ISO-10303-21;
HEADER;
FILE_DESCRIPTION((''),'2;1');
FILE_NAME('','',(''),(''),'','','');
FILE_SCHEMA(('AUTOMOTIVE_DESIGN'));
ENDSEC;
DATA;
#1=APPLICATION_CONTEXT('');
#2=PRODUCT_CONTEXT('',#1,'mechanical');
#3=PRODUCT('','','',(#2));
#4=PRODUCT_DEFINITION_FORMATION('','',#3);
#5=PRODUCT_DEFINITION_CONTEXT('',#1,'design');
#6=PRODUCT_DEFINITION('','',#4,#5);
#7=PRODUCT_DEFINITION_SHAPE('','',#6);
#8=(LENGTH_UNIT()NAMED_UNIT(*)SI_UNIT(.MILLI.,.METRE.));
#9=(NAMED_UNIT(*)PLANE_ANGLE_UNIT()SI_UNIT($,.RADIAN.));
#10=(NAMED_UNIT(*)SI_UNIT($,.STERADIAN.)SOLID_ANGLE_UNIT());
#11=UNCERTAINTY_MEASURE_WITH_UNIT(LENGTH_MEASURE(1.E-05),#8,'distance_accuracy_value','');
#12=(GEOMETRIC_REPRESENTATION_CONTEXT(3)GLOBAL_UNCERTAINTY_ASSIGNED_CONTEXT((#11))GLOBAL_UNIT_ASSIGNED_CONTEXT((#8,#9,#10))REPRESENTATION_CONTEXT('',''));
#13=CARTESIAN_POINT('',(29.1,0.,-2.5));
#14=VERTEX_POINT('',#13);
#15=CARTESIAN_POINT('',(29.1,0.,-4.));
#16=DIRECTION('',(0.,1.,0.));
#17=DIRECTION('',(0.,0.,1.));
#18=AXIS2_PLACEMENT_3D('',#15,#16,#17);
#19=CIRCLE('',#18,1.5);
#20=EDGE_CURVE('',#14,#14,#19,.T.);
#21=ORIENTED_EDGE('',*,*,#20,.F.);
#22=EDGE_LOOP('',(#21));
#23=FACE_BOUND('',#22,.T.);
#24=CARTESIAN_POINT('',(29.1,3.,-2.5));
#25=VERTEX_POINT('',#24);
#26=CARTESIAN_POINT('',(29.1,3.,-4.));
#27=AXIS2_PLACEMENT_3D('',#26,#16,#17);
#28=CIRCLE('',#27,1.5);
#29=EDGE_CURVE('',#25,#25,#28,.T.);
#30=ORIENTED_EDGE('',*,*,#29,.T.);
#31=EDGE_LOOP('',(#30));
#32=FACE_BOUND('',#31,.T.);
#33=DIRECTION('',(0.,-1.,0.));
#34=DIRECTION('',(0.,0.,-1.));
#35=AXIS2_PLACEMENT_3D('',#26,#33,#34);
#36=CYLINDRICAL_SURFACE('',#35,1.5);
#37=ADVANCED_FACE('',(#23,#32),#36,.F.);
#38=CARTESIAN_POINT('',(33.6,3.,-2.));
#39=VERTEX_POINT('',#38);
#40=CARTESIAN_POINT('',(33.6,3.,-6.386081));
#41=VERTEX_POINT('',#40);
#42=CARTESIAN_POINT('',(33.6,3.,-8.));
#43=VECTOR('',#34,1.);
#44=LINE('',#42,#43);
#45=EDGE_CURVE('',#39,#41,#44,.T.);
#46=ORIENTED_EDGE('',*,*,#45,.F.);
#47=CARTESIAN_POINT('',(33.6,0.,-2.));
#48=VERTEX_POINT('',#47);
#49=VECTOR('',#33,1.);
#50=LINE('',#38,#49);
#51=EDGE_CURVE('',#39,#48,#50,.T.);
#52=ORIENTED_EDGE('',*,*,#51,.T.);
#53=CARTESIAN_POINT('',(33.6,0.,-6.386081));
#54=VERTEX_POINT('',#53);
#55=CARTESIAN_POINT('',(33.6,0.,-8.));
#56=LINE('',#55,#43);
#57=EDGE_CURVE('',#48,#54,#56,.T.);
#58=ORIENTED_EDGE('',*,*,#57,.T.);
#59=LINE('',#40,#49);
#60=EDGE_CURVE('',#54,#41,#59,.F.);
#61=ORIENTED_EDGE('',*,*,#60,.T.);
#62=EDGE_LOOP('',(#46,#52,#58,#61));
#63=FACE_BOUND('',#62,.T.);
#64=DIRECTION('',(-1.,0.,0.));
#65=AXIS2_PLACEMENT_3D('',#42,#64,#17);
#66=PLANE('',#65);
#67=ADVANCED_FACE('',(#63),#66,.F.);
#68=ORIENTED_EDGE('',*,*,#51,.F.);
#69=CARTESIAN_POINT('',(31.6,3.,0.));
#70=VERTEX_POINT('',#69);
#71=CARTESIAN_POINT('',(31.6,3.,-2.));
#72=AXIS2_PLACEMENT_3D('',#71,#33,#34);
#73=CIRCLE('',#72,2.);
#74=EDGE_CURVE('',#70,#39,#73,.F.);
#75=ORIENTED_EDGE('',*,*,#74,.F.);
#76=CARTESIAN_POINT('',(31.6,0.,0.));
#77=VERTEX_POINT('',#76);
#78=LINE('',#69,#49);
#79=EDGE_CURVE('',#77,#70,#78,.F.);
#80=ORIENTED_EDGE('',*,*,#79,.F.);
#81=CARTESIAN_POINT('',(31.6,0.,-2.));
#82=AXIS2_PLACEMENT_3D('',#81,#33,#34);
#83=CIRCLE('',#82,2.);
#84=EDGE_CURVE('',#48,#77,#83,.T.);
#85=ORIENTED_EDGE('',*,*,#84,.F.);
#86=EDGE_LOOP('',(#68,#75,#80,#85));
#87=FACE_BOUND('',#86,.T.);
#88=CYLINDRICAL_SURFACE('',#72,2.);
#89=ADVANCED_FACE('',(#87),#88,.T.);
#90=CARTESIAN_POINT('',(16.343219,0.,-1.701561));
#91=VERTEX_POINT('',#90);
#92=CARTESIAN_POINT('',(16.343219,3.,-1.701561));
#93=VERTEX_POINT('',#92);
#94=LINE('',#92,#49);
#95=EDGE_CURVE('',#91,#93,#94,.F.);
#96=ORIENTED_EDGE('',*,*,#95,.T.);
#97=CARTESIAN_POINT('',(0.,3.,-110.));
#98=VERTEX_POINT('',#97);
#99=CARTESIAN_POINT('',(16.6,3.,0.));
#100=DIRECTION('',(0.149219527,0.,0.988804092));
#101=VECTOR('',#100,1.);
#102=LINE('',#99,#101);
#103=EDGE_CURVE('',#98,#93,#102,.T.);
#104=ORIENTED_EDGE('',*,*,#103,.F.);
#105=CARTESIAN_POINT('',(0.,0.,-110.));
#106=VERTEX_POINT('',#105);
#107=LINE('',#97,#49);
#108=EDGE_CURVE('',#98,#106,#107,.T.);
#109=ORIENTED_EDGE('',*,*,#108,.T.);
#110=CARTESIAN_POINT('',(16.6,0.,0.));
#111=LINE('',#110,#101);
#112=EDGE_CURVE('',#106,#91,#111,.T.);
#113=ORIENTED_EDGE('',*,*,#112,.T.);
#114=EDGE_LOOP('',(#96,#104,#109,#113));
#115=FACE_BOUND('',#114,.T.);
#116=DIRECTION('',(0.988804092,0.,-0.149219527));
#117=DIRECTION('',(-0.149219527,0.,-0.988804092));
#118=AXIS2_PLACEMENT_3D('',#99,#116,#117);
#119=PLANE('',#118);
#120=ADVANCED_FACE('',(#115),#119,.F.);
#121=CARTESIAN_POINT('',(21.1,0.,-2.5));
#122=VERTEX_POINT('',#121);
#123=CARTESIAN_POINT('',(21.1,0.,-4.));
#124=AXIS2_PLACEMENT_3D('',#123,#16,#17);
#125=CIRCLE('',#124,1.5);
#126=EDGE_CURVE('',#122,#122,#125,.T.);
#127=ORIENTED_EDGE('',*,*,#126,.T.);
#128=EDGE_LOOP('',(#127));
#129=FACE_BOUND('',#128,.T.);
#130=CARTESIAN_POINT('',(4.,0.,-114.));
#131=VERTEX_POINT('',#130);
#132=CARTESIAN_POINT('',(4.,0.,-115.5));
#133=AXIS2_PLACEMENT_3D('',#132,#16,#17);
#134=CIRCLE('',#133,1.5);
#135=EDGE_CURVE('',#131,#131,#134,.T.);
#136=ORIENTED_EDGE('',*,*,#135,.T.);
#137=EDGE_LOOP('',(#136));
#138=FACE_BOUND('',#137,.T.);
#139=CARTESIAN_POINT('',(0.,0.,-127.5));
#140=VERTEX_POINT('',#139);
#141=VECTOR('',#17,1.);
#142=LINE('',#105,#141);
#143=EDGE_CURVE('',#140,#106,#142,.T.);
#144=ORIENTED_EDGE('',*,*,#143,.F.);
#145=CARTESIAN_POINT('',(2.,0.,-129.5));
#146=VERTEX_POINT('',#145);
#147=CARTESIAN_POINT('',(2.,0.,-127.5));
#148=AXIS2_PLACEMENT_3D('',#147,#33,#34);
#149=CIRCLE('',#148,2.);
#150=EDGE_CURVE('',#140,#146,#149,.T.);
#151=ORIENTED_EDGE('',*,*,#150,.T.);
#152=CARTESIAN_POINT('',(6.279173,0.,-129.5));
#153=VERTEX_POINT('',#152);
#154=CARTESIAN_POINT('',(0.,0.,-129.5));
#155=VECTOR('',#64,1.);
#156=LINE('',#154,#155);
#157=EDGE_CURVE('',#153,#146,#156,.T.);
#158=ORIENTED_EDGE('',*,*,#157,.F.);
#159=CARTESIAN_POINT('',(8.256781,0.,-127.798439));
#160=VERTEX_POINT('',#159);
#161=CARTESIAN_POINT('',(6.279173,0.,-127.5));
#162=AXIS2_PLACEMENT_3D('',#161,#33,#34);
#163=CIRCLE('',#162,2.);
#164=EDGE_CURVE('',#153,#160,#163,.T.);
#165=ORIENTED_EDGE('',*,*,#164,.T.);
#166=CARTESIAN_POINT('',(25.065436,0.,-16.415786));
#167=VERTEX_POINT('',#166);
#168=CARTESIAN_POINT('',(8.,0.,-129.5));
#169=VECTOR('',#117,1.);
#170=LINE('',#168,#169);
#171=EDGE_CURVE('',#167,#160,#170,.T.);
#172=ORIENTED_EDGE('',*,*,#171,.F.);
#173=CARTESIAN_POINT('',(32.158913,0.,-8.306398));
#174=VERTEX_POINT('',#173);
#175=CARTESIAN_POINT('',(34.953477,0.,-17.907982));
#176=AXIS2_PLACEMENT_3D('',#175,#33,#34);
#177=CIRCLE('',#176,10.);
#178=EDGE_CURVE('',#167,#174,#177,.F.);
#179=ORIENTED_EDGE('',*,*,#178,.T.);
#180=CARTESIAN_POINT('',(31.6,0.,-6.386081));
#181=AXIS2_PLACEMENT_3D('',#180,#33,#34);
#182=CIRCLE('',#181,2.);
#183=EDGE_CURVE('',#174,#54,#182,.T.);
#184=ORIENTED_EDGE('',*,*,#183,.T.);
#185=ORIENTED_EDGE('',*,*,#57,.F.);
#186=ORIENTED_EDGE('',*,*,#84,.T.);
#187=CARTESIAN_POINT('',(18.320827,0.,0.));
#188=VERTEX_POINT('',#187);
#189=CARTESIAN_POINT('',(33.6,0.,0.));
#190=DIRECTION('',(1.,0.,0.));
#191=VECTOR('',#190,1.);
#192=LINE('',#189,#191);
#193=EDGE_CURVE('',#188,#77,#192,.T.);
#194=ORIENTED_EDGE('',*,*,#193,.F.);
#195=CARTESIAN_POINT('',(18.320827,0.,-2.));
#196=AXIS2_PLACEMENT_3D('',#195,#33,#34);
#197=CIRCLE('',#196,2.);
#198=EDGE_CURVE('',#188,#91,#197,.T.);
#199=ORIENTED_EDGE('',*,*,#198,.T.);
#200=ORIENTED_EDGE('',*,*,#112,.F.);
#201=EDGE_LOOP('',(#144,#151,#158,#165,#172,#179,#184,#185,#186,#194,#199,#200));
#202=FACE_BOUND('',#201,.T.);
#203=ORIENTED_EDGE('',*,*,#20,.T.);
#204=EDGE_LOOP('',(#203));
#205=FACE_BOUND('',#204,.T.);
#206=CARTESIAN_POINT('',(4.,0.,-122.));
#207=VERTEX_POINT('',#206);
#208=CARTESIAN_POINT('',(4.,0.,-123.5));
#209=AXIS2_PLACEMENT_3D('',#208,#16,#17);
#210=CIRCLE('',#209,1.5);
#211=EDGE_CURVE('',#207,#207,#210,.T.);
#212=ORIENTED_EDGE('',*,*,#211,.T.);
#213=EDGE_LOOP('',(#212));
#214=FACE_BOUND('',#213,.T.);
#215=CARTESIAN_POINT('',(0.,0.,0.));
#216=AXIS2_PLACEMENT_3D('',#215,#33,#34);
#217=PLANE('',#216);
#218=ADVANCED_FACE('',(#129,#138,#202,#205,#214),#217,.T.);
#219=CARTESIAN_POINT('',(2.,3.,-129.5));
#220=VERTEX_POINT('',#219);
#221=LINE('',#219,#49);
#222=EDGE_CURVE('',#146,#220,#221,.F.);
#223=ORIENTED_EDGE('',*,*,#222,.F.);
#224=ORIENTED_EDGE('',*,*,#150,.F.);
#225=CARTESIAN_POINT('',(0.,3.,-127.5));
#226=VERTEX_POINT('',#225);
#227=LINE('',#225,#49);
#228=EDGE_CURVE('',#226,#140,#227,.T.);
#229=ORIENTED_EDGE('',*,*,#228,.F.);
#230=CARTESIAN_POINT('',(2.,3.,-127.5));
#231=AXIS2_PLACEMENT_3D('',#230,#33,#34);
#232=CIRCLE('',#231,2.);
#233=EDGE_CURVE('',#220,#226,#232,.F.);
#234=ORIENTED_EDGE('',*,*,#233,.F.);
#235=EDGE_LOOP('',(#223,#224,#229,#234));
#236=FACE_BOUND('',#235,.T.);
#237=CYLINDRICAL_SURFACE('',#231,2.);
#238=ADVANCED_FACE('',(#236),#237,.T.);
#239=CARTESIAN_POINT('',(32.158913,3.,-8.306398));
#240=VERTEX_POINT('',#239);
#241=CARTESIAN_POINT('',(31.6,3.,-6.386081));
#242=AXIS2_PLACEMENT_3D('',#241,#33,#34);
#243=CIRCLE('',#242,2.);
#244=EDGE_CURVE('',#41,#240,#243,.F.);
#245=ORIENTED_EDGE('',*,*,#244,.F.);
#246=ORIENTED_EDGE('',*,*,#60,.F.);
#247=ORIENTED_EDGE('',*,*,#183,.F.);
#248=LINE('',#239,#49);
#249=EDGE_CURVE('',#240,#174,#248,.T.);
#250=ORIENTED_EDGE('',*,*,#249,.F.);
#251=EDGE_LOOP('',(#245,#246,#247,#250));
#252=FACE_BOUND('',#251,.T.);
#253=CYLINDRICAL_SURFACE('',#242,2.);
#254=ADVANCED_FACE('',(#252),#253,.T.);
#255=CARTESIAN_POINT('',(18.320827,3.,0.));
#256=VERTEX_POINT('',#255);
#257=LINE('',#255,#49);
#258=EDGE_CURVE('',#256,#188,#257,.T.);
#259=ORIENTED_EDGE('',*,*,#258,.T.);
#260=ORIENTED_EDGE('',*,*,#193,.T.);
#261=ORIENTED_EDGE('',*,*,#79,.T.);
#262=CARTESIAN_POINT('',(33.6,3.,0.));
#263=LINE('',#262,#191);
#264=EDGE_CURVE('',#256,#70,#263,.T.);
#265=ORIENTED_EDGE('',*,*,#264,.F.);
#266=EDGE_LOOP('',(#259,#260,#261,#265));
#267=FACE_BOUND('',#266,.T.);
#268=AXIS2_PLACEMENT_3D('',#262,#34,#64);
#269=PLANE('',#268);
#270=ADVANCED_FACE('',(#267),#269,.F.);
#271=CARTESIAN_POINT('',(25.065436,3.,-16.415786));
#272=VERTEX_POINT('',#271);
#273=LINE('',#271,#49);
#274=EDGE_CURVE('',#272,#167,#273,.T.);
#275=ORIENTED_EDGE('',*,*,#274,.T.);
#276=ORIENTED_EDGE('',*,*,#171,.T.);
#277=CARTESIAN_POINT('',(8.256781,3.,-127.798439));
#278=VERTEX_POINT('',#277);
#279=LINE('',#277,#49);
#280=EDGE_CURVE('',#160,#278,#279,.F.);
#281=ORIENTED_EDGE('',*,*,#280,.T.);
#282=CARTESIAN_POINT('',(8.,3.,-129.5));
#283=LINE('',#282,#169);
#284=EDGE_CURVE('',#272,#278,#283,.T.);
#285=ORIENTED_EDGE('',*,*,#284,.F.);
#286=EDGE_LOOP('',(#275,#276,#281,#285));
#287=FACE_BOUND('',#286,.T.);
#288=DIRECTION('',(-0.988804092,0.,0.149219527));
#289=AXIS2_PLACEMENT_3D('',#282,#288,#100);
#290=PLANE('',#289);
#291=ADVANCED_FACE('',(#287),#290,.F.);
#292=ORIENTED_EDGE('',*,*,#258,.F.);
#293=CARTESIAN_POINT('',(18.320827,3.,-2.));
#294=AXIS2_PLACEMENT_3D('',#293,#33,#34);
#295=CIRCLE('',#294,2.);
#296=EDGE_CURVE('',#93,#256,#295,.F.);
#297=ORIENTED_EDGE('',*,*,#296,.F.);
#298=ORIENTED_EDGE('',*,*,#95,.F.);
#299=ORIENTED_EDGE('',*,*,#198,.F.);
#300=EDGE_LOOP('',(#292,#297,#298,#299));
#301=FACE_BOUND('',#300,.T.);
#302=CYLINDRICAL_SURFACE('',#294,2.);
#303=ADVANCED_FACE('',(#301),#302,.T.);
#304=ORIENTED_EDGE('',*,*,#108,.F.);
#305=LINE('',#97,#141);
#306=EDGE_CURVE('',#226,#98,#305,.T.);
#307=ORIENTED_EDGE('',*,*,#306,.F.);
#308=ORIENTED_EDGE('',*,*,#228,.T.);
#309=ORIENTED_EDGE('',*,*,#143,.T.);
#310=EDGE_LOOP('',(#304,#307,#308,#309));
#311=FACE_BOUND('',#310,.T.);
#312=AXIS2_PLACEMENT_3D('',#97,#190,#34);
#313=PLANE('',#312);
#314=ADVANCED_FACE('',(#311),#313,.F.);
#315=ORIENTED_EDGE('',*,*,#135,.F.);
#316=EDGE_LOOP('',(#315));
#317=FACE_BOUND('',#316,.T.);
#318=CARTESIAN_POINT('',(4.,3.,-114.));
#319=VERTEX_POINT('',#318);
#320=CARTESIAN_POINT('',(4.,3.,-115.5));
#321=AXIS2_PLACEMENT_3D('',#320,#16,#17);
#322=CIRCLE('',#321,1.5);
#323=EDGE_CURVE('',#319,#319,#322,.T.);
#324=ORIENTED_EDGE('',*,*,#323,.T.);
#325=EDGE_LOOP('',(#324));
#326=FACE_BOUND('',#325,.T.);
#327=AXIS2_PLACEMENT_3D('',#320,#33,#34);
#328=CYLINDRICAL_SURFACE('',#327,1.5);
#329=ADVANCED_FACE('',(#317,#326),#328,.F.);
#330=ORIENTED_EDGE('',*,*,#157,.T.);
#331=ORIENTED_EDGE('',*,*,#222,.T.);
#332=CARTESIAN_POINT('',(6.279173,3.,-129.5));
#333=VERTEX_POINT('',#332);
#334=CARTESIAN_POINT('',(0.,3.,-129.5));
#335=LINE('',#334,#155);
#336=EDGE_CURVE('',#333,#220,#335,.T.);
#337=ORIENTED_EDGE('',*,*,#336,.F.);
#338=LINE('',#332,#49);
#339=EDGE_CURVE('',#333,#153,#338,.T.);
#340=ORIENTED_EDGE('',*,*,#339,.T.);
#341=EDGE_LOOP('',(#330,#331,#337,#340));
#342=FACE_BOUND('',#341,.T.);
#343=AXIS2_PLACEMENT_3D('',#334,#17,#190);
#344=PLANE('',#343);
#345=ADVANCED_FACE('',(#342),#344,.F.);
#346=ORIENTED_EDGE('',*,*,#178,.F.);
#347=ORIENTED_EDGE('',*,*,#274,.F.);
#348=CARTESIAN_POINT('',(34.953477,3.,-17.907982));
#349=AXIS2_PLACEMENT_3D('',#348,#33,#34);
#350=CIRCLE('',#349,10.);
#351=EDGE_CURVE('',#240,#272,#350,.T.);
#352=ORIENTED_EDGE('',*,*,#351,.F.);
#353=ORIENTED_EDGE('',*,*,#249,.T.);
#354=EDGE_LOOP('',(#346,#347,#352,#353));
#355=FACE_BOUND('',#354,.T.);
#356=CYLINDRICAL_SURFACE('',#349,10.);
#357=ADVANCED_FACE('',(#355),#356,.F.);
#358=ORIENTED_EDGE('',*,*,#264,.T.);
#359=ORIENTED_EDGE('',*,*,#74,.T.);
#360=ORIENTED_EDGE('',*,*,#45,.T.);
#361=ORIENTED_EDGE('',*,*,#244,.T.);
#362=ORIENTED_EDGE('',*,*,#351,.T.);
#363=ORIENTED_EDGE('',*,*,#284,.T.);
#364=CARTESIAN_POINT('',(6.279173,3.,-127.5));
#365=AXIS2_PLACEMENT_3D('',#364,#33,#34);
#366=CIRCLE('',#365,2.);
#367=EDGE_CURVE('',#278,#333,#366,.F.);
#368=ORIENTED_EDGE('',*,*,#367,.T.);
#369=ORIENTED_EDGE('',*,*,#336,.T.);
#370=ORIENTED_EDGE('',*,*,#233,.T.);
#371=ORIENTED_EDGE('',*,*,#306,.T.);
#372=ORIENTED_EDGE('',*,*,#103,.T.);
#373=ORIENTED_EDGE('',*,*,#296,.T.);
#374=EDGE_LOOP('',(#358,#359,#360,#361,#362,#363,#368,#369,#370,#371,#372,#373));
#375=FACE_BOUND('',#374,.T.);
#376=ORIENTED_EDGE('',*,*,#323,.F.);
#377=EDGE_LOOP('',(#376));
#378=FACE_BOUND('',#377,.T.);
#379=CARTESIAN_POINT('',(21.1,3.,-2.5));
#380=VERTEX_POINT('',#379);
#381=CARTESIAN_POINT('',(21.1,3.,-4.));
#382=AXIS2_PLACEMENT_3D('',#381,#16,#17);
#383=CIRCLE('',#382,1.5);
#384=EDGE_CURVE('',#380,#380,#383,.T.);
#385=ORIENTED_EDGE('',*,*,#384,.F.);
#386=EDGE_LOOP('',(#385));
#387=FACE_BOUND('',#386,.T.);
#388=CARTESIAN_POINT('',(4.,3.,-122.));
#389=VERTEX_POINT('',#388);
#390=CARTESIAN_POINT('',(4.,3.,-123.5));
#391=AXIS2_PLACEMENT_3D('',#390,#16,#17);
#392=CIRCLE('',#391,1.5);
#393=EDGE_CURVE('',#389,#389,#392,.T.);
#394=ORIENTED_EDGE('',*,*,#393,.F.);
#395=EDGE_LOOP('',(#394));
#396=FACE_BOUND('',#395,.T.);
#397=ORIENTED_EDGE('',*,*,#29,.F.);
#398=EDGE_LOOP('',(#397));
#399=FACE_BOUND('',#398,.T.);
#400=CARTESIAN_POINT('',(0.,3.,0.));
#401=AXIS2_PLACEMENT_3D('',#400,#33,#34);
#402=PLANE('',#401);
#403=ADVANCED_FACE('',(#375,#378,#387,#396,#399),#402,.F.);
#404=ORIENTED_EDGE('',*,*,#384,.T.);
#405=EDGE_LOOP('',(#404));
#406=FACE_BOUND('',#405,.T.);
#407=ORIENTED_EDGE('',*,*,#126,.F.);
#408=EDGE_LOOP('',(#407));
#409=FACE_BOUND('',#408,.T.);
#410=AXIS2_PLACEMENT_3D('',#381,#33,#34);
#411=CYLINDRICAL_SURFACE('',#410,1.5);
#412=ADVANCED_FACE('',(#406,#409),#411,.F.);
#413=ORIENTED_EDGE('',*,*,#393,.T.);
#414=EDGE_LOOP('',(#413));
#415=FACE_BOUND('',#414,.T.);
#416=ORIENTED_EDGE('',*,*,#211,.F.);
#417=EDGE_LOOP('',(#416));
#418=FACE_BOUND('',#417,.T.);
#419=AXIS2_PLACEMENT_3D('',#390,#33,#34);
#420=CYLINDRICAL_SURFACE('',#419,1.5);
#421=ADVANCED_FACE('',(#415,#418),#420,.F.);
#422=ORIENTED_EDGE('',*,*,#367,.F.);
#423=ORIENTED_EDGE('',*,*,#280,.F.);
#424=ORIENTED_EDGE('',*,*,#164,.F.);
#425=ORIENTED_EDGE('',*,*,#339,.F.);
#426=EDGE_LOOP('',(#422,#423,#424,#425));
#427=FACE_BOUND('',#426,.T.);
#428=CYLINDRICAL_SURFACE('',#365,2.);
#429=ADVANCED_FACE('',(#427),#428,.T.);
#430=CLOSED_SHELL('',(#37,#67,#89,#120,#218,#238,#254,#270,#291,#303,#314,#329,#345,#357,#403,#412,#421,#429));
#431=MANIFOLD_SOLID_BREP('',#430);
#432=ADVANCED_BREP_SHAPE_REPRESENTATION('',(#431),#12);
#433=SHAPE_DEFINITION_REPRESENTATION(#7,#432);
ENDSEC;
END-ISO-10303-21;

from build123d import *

# Parameters (mm, degrees)
SKETCH_1_R      = 1.5
EXTRUDE_1_DEPTH = 3
FILLET_1_R      = 10
FILLET_2_R      = 2
FILLET_3_R      = 2


with BuildPart() as part:
    # 草图1 → 凸台-拉伸1 (new body)
    with BuildSketch(Plane(origin=(0, 0, 0), x_dir=(1, 0, 0), z_dir=(0, 1, 0))):
        Polygon((0, 110), (0, 129.5), (8, 129.5), (26.335454545, 8), (33.6, 8), (33.6, 0), (16.6, 0), align=None)
        with Locations(Location((21.1, 4, 0), (0, 0, 270))):
            Circle(SKETCH_1_R, mode=Mode.SUBTRACT)
        with Locations(Location((29.1, 4, 0), (0, 0, 270))):
            Circle(SKETCH_1_R, mode=Mode.SUBTRACT)
        with Locations(Location((4, 115.5, 0), (0, 0, 270))):
            Circle(SKETCH_1_R, mode=Mode.SUBTRACT)
        with Locations(Location((4, 123.5, 0), (0, 0, 270))):
            Circle(SKETCH_1_R, mode=Mode.SUBTRACT)
    extrude(amount=EXTRUDE_1_DEPTH)

    # 圆角1
    # the kernel refuses this fillet: 10 mm, written as the material it adds along each edge
    with BuildSketch(Plane(origin=(26.335454545, 0, -8), x_dir=(-0.1492195266498612, 0, -0.9888040922581132), z_dir=(0, 1, 0))) as fillet_1_piece_1:
        with BuildLine():
            CenterArc((8.51107561, -10), FILLET_1_R, 90, 73.639575316)
            Line((-1.084012034, -7.183212274), (-1.275913787, -7.126876519))
            ThreePointArc((-1.275913787, -7.126876519), (-0.739766835, -3.561762232), (-0.197760818, 0.029843905))
            Line((-0.197760818, 0.029843905), (0, 0.2))
            Line((0, 0.2), (8.51107561, 0.2))
            Line((8.51107561, 0.2), (8.51107561, 0))
        make_face()
    extrude(amount=3)

    # 圆角2
    fillet_2_edges = [part.edges().sort_by_distance(p)[0] for p in [
        (0, 1.5, -129.5),
        (8, 1.5, -129.5),
        (33.6, 1.5, 0),
        (16.6, 1.5, 0),
    ]]
    fillet(fillet_2_edges, radius=FILLET_2_R)

    # 圆角3
    fillet_3_edges = [part.edges().sort_by_distance(p)[0] for p in [
        (33.6, 1.5, -8),
    ]]
    fillet(fillet_3_edges, radius=FILLET_3_R)


solid = part.part
